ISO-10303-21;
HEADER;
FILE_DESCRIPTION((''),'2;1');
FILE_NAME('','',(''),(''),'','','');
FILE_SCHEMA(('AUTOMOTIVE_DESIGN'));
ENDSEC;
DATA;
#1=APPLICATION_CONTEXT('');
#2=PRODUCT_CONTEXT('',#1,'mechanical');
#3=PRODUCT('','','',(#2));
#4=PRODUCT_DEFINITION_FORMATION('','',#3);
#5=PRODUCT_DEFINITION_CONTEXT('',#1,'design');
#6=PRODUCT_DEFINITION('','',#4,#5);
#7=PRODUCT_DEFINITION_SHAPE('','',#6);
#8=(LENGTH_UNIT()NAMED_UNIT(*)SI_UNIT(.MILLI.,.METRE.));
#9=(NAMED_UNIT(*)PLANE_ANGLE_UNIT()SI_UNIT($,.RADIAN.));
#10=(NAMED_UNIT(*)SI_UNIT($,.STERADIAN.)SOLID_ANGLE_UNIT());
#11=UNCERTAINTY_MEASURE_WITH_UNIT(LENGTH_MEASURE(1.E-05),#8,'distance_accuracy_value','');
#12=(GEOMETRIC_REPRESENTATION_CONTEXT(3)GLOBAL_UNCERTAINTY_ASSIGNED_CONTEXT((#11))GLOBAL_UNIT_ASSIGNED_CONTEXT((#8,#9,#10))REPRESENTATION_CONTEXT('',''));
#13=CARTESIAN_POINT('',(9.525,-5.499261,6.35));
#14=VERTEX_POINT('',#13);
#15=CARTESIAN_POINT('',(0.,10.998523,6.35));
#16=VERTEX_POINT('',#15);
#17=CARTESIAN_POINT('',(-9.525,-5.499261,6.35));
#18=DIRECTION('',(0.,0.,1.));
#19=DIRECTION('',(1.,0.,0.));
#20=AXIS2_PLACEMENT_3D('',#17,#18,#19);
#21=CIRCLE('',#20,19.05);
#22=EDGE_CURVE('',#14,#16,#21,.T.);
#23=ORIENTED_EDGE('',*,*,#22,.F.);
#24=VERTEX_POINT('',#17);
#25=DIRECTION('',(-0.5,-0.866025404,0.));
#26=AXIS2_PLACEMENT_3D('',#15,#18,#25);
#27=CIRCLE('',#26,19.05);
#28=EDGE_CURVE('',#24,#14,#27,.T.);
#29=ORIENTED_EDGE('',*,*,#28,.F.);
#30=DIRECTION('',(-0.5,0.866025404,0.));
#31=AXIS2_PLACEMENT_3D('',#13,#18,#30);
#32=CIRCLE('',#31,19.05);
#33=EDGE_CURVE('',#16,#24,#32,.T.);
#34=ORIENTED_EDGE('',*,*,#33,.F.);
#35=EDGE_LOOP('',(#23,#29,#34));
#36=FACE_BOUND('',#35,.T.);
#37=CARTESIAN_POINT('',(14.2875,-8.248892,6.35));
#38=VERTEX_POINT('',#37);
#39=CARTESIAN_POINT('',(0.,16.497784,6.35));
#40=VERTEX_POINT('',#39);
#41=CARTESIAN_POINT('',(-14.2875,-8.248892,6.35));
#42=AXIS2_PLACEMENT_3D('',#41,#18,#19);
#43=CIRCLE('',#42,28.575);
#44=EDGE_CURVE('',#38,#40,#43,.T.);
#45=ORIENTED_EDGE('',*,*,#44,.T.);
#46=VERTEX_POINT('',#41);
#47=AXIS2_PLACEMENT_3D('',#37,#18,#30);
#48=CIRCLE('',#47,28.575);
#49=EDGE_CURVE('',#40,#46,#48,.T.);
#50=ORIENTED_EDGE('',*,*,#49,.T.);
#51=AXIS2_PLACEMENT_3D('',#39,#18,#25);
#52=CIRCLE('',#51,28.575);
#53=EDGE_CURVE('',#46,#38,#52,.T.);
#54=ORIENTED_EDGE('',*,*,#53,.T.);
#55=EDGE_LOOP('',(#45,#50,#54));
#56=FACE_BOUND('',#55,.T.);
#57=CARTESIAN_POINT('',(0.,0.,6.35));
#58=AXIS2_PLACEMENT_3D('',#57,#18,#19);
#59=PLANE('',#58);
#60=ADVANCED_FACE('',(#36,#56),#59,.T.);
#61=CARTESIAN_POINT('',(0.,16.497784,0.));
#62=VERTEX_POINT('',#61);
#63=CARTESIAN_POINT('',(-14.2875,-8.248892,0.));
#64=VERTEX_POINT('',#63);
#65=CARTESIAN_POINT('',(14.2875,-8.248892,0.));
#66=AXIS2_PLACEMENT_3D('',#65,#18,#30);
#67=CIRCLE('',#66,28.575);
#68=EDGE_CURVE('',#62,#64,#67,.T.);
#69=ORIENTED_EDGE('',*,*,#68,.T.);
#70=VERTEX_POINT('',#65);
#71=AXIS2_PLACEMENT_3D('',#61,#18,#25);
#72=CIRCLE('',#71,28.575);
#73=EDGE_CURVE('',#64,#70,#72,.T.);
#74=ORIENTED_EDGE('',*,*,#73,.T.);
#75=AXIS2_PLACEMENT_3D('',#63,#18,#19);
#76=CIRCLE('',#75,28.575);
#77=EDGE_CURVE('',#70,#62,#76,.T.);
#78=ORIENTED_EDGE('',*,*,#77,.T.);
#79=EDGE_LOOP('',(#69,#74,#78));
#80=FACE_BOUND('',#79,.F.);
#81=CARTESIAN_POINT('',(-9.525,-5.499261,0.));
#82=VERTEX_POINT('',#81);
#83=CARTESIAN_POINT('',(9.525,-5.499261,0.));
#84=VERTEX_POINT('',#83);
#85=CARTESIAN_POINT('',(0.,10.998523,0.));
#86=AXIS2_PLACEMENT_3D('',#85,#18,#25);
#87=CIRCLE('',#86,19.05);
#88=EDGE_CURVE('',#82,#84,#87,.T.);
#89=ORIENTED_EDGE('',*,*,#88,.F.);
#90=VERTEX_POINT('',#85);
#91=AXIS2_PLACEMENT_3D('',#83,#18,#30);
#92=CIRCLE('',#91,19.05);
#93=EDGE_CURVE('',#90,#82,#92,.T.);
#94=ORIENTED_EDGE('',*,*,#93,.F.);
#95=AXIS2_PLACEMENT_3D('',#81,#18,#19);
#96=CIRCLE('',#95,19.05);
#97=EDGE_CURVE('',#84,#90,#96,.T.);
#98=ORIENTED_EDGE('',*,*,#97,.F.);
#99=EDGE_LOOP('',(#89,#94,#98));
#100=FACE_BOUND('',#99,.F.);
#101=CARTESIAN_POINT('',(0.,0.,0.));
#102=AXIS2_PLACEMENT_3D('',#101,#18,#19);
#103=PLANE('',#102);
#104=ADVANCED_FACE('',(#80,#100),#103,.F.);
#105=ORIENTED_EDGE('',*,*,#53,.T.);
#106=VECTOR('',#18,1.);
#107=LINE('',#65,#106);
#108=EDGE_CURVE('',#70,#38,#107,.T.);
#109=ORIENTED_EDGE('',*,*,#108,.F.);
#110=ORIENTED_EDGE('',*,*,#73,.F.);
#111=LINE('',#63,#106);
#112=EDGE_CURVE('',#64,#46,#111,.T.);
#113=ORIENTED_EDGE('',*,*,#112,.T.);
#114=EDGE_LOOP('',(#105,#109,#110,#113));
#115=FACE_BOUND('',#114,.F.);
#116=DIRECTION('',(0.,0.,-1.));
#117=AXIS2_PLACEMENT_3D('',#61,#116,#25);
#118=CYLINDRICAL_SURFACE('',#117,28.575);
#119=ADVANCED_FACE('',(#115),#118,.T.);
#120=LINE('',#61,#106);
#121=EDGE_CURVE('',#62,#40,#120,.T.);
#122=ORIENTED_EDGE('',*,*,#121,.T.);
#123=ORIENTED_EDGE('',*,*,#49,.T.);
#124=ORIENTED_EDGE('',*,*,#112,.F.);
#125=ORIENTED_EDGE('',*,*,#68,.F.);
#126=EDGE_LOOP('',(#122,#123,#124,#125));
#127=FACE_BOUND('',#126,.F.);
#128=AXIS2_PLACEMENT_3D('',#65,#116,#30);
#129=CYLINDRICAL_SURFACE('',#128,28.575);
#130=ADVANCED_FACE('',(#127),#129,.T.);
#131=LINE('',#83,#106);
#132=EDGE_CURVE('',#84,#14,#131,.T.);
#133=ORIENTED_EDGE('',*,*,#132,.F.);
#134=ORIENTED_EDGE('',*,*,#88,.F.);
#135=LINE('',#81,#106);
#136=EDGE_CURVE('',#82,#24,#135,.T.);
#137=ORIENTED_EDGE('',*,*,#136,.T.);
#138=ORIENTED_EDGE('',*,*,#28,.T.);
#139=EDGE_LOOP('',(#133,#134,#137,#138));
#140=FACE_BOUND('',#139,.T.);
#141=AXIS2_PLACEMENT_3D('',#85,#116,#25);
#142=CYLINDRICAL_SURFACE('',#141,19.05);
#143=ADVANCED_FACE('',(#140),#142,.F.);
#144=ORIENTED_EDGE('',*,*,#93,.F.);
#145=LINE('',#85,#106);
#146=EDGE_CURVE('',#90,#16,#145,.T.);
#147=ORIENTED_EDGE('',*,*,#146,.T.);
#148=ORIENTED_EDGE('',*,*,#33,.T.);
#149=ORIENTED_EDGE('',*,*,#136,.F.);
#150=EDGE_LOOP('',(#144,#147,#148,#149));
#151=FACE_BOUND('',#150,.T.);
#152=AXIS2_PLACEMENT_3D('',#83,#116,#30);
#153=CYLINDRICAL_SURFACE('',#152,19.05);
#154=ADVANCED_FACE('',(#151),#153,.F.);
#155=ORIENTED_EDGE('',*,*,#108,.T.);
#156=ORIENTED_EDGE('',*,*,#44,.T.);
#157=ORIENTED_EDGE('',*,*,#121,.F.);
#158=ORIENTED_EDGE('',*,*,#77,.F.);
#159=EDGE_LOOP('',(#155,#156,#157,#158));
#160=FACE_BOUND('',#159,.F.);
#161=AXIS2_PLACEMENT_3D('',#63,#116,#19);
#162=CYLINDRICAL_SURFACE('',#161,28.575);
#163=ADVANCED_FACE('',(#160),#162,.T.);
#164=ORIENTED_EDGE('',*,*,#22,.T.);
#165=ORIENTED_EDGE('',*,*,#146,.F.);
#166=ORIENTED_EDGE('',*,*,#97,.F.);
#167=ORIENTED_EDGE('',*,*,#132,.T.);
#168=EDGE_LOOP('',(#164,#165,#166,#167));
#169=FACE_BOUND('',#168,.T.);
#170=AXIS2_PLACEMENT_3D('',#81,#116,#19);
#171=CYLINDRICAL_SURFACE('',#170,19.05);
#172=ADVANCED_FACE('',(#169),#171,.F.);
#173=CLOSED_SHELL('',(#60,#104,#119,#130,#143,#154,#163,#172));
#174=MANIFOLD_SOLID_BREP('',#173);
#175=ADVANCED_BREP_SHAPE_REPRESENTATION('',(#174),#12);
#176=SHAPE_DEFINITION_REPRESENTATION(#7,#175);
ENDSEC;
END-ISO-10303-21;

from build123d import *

# Parameters (mm, degrees)
F2_DEPTH = 6.35
F3_DEPTH = 6.35


# Not quite as in the source:
# - a feature of the source that left no trace in its solid (it failed there, or was rolled back) is left out


with BuildPart() as f2:
    # F1 (on Top) → F2 (new body)
    with BuildSketch(Plane.XY):
        with BuildLine():
            ThreePointArc((14.2875, -8.248891971), (10.4591759131, 6.038608029), (0, 16.4977839421))
            ThreePointArc((0, 16.4977839421), (-10.4591759131, 6.038608029), (-14.2875, -8.248891971))
            ThreePointArc((-14.2875, -8.248891971), (0, -12.0772160579), (14.2875, -8.248891971))
        make_face()
    extrude(amount=F2_DEPTH)

    # F0 (on Top) → F3 (cut, through all)
    with BuildSketch(Plane.XY):
        with BuildLine():
            ThreePointArc((9.525, -5.499261314), (6.9727839421, 4.025738686), (0, 10.9985226281))
            ThreePointArc((0, 10.9985226281), (-6.9727839421, 4.025738686), (-9.525, -5.499261314))
            ThreePointArc((-9.525, -5.499261314), (0, -8.0514773719), (9.525, -5.499261314))
        make_face()
    extrude(amount=F3_DEPTH, mode=Mode.SUBTRACT)


solid = f2.part
